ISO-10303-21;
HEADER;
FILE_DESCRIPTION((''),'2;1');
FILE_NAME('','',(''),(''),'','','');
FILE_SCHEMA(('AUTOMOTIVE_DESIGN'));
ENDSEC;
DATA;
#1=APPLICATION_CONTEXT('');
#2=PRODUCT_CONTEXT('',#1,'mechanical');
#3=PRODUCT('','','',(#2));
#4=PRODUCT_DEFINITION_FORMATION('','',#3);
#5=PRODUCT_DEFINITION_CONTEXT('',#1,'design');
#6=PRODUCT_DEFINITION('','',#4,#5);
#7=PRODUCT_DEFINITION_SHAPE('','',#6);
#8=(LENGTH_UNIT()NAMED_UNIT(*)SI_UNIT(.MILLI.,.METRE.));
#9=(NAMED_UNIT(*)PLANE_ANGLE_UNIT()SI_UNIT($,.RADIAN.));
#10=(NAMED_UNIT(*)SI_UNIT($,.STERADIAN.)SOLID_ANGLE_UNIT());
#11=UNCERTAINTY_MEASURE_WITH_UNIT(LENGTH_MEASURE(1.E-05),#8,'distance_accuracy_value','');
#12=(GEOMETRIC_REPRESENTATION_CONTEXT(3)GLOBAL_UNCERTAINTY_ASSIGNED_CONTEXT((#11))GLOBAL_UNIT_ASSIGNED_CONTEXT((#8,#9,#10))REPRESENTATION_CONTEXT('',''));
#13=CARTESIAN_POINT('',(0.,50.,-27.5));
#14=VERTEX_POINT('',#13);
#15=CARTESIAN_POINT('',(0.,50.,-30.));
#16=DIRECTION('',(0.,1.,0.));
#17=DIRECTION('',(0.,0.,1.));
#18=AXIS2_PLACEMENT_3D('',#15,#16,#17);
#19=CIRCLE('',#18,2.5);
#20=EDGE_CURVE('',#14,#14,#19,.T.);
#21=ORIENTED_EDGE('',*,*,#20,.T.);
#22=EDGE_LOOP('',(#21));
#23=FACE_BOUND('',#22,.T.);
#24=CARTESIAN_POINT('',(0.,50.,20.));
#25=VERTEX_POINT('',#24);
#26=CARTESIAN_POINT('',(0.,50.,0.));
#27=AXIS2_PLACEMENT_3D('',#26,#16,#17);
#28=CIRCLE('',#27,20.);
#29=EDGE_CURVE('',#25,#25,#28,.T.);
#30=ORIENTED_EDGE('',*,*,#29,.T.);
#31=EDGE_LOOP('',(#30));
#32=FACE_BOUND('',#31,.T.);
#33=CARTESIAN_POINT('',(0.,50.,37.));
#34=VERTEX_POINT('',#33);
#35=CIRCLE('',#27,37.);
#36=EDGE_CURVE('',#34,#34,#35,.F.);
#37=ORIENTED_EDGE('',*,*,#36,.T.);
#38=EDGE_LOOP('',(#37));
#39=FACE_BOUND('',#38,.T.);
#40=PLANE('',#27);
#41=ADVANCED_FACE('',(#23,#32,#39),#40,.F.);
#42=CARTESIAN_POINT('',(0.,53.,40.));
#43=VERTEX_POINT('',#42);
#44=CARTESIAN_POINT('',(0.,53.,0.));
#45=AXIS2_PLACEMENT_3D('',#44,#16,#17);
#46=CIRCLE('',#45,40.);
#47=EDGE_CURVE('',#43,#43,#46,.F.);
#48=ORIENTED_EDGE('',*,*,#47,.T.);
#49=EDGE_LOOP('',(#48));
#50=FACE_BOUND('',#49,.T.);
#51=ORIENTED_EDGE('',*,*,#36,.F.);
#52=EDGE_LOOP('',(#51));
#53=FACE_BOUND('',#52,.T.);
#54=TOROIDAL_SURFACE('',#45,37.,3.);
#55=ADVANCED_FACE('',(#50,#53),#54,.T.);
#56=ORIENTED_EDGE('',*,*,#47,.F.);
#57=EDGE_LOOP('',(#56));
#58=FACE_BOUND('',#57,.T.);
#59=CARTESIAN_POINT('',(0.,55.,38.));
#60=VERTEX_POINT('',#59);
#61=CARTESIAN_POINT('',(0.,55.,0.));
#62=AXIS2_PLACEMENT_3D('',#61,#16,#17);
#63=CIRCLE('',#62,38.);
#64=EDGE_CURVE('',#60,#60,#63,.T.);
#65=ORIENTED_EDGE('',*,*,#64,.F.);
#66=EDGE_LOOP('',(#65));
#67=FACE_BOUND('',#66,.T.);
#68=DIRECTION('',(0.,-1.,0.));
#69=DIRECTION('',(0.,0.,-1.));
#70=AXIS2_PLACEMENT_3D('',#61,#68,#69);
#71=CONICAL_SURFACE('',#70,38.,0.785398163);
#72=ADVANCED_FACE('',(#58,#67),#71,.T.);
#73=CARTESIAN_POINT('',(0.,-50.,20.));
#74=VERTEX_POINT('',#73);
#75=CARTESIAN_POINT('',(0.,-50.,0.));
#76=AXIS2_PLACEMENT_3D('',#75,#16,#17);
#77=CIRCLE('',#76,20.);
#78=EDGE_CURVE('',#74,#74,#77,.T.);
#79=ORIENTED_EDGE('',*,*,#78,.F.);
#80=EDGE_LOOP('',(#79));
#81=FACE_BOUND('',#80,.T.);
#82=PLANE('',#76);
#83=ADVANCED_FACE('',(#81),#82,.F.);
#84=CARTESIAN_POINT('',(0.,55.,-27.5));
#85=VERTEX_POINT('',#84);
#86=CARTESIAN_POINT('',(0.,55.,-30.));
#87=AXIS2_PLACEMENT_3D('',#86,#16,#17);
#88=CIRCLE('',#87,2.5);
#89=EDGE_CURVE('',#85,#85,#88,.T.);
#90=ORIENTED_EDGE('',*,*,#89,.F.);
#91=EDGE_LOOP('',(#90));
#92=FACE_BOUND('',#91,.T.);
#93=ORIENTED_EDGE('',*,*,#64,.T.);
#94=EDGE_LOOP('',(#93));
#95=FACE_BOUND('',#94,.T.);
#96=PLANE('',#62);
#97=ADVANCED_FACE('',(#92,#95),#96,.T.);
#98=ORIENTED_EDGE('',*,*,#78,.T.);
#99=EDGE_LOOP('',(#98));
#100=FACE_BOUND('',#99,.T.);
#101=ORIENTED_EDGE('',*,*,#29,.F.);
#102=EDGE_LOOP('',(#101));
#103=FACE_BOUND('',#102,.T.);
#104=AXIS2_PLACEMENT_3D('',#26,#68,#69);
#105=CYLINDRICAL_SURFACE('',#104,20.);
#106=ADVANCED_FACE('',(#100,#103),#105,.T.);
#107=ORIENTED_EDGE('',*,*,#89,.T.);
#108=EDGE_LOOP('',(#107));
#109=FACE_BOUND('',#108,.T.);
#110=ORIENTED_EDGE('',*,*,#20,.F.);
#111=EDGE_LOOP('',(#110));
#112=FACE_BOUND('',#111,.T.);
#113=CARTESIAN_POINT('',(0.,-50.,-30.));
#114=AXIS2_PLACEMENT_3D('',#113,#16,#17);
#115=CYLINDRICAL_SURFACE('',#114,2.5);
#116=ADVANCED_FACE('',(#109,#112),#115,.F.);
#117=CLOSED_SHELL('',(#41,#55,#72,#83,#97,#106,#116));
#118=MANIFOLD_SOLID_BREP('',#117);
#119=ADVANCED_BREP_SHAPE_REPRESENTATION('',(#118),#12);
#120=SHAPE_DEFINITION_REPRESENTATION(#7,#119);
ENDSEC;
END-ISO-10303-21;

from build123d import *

# Parameters (mm, degrees)
SKETCH1_R               = 20
BOSS_EXTRUDE1_DEPTH     = 50
SKETCH3_R               = 40
BOSS_EXTRUDE2_DEPTH     = 5
CHAMFER1_SIZE           = 2
CUT_EXTRUDE1_DEPTH      = 120.268604419
CUT_EXTRUDE1_DEPTH_BACK = 120.268604419
SKETCH4_R               = 2.5
FILLET1_R               = 3


with BuildPart() as part:
    # Sketch1 → Boss-Extrude1 (new, symmetric)
    with BuildSketch(Plane(origin=(0, 0, 0), x_dir=(1, 0, 0), z_dir=(0, 1, 0))):
        with Locations(Location((0, 0, 0), (0, 0, 270))):
            Circle(SKETCH1_R)
    extrude(amount=BOSS_EXTRUDE1_DEPTH, both=True)

    # Sketch3 → Boss-Extrude2 (add)
    with BuildSketch(Plane(origin=(0, 50, 0), x_dir=(1, 0, 0), z_dir=(0, 1, 0))):
        with Locations(Location((0, 0, 0), (0, 0, 270))):
            Circle(SKETCH3_R)
    extrude(amount=BOSS_EXTRUDE2_DEPTH)

    # Chamfer1
    chamfer1_edges = [part.edges().sort_by_distance(p)[0] for p in [
        (0, 55, -40),
    ]]
    chamfer(chamfer1_edges, length=CHAMFER1_SIZE)

    # Sketch4 → Cut-Extrude1 (cut, two sides: drawn at the far end of the back side and taken through both)
    with BuildSketch(Plane(origin=(0, 55, 0), x_dir=(1, 0, 0), z_dir=(0, 1, 0)).offset(-CUT_EXTRUDE1_DEPTH_BACK)):
        with Locations(Location((0, 30, 0), (0, 0, 270))):
            Circle(SKETCH4_R)
    extrude(amount=CUT_EXTRUDE1_DEPTH + CUT_EXTRUDE1_DEPTH_BACK, mode=Mode.SUBTRACT)

    # Fillet1
    fillet1_edges = [part.edges().sort_by_distance(p)[0] for p in [
        (0, 50, -40),
    ]]
    fillet(fillet1_edges, radius=FILLET1_R - 0.0001)  # a hair under: the kernel refuses the full size


solid = part.part
